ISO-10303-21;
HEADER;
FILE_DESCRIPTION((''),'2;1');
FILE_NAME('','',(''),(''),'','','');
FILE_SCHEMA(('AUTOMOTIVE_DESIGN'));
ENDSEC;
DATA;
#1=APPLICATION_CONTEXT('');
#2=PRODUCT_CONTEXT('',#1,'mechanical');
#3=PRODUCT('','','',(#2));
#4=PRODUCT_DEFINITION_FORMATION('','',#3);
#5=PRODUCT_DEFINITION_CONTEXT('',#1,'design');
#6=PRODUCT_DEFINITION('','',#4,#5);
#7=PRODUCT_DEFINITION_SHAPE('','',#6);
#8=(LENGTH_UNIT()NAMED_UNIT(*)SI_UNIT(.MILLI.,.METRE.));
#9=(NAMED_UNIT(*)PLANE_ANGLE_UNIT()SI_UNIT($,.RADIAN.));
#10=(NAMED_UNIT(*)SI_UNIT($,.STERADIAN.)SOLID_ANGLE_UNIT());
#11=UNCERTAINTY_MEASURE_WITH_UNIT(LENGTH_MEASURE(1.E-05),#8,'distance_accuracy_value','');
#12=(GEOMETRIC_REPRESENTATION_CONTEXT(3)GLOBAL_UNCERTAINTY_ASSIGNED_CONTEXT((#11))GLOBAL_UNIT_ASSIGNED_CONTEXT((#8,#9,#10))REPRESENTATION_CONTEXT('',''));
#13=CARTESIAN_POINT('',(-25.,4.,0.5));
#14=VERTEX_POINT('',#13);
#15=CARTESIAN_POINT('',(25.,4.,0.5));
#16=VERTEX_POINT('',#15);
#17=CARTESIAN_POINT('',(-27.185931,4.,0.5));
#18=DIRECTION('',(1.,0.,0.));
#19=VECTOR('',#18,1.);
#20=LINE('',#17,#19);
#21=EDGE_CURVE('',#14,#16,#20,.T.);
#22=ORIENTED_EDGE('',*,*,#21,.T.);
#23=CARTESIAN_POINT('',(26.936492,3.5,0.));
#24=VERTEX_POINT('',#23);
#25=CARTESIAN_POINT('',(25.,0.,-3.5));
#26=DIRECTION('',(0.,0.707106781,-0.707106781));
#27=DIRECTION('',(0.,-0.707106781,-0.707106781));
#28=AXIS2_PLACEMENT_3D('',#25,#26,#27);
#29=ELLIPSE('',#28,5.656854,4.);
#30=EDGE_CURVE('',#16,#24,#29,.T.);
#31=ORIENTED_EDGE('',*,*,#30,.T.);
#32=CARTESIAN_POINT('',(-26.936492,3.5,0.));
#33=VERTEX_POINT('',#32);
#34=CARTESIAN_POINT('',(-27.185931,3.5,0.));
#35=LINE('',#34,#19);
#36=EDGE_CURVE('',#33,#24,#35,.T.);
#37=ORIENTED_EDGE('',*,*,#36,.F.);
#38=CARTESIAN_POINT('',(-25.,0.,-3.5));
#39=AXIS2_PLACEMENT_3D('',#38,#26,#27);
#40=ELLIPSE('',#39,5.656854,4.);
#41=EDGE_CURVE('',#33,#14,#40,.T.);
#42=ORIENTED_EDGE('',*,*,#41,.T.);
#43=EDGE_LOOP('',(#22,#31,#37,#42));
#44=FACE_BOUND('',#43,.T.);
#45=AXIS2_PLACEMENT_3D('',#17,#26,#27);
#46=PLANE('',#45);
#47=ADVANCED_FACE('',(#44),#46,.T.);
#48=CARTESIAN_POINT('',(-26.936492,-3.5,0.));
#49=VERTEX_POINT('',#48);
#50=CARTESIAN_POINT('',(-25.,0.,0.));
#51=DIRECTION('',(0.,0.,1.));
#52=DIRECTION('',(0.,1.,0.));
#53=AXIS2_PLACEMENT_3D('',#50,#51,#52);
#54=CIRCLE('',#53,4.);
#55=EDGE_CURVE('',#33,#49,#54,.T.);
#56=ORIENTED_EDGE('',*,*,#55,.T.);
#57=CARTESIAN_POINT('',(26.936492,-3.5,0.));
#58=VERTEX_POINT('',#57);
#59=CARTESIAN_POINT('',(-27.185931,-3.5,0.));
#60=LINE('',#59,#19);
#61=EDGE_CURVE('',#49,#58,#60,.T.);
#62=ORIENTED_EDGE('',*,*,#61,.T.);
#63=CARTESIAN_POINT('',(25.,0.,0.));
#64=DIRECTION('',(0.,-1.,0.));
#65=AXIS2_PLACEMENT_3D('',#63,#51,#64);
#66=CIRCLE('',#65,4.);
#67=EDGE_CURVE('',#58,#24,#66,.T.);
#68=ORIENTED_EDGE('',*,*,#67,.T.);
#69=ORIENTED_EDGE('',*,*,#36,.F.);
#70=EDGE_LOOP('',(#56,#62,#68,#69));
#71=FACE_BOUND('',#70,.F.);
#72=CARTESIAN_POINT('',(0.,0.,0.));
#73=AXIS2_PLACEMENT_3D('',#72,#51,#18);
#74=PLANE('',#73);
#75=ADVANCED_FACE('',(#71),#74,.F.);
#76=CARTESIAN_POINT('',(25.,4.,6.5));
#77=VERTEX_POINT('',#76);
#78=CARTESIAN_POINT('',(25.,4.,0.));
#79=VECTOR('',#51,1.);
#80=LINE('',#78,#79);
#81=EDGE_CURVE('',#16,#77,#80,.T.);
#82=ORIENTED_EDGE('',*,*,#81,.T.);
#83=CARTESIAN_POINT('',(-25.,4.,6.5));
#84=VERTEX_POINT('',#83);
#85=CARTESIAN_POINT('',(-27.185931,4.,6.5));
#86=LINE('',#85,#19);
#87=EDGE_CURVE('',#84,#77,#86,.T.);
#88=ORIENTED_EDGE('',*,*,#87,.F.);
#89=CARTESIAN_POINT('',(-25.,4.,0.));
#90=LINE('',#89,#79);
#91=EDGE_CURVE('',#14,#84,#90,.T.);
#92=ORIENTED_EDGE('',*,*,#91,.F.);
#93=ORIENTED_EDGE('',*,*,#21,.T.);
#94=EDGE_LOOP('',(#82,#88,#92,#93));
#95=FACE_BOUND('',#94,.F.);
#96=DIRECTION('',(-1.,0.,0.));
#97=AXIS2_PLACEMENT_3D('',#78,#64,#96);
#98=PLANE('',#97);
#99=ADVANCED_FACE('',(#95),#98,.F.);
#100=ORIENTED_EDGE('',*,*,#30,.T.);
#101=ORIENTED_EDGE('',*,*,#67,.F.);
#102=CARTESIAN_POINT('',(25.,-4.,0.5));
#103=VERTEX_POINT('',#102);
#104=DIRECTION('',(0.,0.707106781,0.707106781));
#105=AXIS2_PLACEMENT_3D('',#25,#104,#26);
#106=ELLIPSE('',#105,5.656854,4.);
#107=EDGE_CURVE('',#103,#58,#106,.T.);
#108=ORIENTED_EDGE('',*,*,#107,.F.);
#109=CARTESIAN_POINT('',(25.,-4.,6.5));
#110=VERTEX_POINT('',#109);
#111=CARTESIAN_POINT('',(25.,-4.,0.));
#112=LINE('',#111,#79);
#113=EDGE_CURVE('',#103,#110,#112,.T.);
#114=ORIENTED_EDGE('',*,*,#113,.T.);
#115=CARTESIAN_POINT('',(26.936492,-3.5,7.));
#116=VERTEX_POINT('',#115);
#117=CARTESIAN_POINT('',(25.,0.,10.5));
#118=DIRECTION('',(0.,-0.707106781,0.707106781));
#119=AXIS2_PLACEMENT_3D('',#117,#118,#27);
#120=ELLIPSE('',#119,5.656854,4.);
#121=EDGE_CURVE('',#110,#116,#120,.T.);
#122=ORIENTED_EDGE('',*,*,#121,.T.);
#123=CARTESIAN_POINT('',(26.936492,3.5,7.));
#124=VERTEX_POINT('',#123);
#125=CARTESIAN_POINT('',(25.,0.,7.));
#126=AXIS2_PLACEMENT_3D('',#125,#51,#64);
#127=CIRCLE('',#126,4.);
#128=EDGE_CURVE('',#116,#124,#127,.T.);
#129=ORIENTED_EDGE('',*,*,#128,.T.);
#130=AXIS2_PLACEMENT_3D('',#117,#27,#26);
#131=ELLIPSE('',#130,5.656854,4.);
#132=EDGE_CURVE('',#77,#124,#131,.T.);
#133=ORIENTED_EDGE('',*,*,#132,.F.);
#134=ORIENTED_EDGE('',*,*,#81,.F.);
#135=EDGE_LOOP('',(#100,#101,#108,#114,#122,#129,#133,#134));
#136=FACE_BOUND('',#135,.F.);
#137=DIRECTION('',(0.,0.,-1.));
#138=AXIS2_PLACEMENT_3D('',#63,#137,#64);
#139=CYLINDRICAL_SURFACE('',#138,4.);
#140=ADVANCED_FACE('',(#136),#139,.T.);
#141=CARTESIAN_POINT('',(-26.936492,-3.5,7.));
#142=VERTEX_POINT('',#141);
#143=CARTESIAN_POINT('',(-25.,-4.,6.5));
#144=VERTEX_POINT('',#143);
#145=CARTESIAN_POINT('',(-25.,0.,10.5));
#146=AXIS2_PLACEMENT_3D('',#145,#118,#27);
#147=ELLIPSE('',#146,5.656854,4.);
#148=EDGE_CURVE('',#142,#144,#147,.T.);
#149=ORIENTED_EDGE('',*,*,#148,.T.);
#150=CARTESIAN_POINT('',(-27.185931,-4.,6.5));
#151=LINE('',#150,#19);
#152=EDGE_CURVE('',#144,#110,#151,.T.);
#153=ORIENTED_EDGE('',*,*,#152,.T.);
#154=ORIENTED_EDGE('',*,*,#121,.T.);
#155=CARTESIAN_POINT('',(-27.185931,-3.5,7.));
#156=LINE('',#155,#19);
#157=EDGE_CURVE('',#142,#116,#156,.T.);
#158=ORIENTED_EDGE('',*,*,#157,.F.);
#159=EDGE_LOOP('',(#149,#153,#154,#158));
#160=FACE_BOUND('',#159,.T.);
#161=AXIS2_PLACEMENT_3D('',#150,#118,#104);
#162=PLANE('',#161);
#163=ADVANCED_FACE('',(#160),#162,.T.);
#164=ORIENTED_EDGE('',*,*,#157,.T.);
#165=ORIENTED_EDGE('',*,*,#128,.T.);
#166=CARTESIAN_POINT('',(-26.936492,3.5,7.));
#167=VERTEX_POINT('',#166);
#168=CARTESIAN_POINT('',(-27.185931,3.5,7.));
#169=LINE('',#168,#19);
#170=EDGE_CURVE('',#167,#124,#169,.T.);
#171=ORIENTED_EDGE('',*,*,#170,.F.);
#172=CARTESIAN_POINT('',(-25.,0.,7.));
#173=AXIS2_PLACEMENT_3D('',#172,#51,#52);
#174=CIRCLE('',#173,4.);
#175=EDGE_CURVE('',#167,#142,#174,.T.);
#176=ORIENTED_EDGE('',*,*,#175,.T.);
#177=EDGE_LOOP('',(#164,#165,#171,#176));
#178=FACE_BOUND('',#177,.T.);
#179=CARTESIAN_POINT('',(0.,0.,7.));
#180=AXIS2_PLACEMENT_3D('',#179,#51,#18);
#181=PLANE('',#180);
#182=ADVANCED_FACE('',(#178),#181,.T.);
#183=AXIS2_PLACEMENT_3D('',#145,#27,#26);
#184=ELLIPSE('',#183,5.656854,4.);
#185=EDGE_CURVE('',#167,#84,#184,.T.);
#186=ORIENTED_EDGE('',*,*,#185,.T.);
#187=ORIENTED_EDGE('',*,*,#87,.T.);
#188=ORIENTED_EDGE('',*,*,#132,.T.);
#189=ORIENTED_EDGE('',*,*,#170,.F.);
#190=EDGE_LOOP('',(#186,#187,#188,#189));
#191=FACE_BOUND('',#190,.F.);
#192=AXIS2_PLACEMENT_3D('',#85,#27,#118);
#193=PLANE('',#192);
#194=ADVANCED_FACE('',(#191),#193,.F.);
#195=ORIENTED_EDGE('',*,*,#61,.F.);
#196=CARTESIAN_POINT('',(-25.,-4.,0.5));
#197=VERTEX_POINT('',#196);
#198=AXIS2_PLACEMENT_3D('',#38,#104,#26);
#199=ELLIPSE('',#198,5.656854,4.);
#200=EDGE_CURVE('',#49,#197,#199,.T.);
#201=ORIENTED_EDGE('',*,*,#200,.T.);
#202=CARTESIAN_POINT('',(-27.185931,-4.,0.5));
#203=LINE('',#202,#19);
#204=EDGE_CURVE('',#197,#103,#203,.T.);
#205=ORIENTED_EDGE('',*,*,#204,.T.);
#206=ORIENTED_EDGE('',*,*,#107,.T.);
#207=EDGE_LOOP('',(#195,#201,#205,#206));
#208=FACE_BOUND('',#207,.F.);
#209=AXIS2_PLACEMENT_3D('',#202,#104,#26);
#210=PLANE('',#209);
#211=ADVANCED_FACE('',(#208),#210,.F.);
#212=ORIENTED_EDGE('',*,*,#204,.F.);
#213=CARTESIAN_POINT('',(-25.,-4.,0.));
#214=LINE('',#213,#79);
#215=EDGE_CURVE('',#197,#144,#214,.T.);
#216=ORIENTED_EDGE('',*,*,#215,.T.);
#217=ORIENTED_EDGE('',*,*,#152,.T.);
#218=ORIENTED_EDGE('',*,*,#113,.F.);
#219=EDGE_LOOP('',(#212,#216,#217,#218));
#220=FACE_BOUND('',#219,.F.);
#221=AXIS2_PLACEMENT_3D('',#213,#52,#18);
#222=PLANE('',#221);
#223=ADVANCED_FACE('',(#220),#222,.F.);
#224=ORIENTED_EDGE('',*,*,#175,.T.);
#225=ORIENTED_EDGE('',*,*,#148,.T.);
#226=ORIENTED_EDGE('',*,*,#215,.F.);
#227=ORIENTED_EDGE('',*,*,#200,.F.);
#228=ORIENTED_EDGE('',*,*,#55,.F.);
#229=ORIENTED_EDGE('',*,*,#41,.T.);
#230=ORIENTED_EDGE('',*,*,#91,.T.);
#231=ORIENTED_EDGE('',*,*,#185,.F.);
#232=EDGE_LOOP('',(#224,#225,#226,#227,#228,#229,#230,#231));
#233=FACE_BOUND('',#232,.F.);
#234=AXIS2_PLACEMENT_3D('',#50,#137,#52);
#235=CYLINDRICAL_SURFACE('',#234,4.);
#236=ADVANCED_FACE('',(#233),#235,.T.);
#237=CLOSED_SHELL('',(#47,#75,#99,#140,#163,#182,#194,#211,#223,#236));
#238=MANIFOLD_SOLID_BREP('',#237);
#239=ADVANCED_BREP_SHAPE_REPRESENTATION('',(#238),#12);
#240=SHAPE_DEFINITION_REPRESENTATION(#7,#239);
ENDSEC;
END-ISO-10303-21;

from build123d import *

# Parameters (mm, degrees)
F1_DEPTH    = 7
F2_T1_DEPTH = 54.3718610795


# Not quite as in the source:
# - a fillet or chamfer that OpenCascade refuses, or shapes differently, is made with other operations: its cross-section is extruded or revolved along the edge and cut away or added


with BuildPart() as f1:
    # F0 (on Top) → F1 (new body)
    with BuildSketch(Plane.XY):
        with BuildLine():
            Line((-25, -4), (25, -4))
            ThreePointArc((25, -4), (29, 0), (25, 4))
            Line((25, 4), (-25, 4))
            ThreePointArc((-25, 4), (-29, 0), (-25, -4))
        make_face()
    extrude(amount=F1_DEPTH)

    # F2: chamfer of 0.5 on 4 edges, made by hand

    # F2_s2 → F2_t1 (cut)
    with BuildSketch(Plane.YZ.offset(-27.1859305398)):
        Polygon((-4, 6.5), (-3.5, 7), (-4, 7), align=None)
        Polygon((4, 6.5), (3.5, 7), (4, 7), align=None)
        Polygon((-4, 0.5), (-3.5, 0), (-4, 0), align=None)
        Polygon((4, 0.5), (3.5, 0), (4, 0), align=None)
    extrude(amount=F2_T1_DEPTH, mode=Mode.SUBTRACT)


solid = f1.part
